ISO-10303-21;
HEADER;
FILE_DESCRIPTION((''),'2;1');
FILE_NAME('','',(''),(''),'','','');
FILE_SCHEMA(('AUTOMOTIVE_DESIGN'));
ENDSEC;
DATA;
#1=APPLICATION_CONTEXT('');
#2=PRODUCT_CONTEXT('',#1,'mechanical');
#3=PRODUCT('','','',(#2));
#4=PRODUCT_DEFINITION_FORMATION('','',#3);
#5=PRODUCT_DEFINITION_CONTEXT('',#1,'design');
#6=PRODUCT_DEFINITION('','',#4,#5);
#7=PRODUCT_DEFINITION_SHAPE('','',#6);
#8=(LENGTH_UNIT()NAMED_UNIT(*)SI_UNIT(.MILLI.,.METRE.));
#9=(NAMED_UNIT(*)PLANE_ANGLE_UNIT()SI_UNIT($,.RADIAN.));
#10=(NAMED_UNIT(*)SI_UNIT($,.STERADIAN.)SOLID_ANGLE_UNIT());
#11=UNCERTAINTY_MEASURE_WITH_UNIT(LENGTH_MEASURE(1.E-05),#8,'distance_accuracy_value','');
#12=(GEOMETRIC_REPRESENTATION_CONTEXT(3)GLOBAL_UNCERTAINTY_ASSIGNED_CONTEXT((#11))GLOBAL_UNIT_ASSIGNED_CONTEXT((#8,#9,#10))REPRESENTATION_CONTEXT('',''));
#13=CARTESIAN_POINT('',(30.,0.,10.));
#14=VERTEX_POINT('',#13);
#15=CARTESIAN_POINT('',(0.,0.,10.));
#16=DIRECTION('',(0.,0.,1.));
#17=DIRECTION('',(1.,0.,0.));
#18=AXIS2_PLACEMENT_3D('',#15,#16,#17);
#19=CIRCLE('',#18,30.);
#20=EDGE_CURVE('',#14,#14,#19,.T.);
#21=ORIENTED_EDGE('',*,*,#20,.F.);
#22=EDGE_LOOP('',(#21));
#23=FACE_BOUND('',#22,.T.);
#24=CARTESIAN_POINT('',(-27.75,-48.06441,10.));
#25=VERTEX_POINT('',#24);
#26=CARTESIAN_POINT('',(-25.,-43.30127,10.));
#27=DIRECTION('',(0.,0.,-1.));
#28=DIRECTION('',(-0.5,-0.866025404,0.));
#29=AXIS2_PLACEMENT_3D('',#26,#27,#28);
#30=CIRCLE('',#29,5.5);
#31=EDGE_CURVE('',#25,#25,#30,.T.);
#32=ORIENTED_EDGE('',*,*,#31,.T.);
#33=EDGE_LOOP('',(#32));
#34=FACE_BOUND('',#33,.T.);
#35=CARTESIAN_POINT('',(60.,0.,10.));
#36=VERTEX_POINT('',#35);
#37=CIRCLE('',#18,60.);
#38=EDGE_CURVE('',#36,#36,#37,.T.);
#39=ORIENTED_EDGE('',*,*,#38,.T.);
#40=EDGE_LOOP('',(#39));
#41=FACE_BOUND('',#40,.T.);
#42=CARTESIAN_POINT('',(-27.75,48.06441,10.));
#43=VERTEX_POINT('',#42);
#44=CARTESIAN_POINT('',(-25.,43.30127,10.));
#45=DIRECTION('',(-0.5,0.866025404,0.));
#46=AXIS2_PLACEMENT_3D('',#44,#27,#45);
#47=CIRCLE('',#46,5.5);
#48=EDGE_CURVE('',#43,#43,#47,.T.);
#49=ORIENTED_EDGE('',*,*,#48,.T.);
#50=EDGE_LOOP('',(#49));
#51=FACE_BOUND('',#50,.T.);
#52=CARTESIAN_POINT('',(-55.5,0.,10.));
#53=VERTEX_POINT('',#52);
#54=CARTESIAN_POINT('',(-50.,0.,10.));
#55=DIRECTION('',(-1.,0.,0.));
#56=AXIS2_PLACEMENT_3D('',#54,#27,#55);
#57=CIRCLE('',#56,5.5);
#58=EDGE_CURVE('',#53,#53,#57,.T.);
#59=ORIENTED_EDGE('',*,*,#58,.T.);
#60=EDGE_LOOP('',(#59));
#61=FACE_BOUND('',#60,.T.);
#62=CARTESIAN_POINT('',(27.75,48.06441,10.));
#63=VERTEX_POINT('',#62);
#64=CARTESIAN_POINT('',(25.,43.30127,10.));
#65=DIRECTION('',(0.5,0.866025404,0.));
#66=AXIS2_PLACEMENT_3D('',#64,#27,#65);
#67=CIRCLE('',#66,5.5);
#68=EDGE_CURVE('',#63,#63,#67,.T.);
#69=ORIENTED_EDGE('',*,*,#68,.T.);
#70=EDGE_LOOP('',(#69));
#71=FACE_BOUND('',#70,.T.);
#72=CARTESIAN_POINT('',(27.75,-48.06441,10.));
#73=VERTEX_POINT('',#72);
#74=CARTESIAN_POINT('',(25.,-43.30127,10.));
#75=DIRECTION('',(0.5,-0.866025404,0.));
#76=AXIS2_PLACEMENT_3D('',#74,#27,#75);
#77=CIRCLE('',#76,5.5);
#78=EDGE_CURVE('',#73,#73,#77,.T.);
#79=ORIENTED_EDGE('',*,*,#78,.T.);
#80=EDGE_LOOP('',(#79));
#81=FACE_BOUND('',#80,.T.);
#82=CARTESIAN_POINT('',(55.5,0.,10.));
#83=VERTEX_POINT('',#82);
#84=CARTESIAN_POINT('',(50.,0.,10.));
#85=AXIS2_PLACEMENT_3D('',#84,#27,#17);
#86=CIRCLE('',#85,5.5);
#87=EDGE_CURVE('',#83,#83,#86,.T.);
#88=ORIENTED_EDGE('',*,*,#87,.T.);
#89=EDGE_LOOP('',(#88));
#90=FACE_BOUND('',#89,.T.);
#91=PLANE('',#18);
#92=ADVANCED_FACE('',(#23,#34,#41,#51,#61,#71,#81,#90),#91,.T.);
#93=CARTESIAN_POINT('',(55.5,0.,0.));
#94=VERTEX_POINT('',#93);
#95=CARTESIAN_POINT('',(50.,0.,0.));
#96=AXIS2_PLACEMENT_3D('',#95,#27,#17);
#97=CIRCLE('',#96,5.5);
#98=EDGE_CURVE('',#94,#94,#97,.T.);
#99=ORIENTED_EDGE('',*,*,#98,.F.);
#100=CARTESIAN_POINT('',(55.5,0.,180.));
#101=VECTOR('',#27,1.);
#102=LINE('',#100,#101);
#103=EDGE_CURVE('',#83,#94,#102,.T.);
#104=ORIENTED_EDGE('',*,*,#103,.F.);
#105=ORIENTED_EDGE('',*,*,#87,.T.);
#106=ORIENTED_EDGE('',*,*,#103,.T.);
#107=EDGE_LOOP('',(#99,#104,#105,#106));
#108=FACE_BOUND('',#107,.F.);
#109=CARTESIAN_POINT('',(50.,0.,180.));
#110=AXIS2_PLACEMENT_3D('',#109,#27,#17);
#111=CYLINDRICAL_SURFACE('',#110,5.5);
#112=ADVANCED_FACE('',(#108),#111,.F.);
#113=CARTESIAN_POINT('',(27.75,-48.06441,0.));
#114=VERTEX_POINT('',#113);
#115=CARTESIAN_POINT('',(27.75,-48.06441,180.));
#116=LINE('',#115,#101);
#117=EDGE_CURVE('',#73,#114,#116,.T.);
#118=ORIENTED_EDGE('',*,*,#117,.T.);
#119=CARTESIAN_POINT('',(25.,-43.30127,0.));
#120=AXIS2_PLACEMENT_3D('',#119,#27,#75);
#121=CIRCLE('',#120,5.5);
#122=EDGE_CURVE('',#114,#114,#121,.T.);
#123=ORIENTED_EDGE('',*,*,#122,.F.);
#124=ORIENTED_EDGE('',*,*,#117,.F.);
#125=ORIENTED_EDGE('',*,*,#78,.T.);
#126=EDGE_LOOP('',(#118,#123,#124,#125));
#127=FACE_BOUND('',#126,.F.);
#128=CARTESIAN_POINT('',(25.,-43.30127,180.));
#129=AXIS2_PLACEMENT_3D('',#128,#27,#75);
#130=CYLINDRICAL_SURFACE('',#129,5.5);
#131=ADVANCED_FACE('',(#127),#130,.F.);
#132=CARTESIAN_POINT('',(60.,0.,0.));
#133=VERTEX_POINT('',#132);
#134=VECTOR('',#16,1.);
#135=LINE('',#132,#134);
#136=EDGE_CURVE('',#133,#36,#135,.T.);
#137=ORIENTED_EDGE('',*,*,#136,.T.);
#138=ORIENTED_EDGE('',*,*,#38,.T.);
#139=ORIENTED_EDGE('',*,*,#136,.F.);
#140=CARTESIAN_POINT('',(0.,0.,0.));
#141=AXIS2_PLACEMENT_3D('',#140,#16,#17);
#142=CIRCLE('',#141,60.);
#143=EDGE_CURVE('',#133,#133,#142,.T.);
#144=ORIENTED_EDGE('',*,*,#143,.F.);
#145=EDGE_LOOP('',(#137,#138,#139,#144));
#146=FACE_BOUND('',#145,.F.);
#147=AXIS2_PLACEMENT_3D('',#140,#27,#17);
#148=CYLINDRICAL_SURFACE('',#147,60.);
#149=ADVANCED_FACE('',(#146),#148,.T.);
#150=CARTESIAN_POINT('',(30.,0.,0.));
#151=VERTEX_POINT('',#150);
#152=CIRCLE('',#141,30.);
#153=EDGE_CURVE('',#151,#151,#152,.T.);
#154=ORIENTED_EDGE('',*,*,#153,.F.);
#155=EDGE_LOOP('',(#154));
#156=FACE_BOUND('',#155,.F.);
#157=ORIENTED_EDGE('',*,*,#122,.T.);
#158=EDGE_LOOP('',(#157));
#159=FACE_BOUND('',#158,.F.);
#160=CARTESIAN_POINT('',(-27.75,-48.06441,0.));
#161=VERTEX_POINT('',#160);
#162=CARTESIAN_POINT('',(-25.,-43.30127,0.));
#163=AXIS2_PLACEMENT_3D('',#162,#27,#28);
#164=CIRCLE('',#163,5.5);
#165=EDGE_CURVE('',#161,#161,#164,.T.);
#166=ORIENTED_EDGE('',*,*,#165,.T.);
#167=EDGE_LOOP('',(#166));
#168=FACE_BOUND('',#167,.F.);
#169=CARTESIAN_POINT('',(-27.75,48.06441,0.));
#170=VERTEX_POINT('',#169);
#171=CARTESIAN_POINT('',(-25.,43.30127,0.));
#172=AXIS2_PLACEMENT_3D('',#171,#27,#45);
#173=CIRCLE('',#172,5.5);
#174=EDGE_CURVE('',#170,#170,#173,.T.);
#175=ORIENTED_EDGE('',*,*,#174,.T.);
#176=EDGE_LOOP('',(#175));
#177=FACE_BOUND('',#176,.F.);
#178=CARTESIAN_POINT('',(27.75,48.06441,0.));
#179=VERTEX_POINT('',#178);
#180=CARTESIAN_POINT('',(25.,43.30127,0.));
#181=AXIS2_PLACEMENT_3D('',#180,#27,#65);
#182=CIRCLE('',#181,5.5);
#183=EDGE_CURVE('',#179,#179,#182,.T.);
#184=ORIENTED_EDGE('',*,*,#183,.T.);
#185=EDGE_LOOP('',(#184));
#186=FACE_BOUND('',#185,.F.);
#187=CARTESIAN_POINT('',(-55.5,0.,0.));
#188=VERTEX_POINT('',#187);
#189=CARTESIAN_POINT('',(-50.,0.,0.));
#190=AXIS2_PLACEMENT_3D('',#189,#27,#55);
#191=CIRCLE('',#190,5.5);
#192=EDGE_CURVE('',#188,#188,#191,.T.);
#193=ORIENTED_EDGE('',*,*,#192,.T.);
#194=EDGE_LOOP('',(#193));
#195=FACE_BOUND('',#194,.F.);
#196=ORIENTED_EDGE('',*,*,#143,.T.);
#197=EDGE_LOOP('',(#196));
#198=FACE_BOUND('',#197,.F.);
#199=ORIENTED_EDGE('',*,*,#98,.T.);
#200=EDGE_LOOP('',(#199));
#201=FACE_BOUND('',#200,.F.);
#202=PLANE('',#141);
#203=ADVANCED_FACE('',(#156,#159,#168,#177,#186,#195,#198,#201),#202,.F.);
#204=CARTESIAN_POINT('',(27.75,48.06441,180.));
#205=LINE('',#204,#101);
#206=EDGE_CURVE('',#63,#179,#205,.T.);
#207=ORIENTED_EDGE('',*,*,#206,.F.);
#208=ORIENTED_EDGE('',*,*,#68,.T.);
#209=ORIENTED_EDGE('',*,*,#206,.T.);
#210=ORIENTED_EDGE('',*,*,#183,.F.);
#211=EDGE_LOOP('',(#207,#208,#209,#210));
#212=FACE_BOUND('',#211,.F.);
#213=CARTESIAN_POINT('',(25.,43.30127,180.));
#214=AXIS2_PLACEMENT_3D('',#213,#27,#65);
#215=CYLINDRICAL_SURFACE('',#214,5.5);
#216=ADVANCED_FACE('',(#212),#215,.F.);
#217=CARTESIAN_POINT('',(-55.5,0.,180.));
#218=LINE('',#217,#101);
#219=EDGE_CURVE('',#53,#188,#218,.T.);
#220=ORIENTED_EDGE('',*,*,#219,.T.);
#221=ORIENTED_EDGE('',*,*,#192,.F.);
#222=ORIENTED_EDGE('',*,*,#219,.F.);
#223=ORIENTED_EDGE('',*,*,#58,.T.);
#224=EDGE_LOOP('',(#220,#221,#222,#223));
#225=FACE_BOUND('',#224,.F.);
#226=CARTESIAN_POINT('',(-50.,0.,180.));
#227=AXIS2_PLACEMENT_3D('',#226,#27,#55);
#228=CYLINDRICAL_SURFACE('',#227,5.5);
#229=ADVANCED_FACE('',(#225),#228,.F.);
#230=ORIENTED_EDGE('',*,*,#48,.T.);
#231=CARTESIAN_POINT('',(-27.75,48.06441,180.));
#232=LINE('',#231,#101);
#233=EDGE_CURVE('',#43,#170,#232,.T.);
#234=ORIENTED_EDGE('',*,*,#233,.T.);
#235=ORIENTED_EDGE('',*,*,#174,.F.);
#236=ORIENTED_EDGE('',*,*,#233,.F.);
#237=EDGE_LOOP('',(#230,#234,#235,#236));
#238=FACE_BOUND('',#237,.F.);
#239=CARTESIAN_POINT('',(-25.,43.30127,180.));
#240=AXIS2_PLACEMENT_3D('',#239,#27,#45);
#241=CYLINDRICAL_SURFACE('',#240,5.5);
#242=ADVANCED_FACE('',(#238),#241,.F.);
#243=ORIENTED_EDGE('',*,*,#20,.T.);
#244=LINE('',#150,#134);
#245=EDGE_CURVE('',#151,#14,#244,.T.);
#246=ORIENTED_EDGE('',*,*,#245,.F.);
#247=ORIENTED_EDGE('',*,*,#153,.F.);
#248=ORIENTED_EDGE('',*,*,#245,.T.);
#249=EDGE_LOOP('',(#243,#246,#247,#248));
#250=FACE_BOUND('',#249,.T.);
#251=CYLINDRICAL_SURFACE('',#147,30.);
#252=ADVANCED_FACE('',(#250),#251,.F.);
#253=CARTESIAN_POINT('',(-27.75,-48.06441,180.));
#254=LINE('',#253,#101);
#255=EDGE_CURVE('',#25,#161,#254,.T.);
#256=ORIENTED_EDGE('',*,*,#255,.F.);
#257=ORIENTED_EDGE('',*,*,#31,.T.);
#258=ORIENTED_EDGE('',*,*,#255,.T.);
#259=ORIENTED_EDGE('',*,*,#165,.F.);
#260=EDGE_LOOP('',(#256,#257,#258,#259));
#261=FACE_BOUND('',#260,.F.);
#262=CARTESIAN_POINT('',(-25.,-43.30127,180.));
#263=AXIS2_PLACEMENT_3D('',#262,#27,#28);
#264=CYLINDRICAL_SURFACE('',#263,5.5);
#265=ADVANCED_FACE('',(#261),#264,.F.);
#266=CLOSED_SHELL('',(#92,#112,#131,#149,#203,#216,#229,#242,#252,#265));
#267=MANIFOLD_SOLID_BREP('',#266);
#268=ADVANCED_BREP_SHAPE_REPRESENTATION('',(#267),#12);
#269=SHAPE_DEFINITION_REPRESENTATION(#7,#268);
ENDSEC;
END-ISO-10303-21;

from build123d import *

# Parameters (mm, degrees)
F0_R            = 60
F0_R_2          = 30
F1_DEPTH        = 10
F3_D            = 11
F3_COPIES_COUNT = 6


# Not quite as in the source:
# - a pattern or mirror of a feature is missing from the dataset's text; its kind, count and spacing are read off the source's solid


with BuildPart() as f1:
    # F0 (on Top) → F1 (new body)
    with BuildSketch(Plane.XY):
        Circle(F0_R)
        Circle(F0_R_2, mode=Mode.SUBTRACT)
    extrude(amount=F1_DEPTH)

    # F3 (through all)
    with Locations(Plane.XY.offset(10)):
        with Locations((-50, 0)):
            f3 = Hole(F3_D / 2)

    # F3_copies: F3 ×6 about axis
    f3_copies_axis = Axis((0, 0, 0), (0, 0, 1))
    for i in range(1, F3_COPIES_COUNT):
        add(f3.rotate(f3_copies_axis, i * 360 / F3_COPIES_COUNT), mode=Mode.SUBTRACT)


solid = f1.part
